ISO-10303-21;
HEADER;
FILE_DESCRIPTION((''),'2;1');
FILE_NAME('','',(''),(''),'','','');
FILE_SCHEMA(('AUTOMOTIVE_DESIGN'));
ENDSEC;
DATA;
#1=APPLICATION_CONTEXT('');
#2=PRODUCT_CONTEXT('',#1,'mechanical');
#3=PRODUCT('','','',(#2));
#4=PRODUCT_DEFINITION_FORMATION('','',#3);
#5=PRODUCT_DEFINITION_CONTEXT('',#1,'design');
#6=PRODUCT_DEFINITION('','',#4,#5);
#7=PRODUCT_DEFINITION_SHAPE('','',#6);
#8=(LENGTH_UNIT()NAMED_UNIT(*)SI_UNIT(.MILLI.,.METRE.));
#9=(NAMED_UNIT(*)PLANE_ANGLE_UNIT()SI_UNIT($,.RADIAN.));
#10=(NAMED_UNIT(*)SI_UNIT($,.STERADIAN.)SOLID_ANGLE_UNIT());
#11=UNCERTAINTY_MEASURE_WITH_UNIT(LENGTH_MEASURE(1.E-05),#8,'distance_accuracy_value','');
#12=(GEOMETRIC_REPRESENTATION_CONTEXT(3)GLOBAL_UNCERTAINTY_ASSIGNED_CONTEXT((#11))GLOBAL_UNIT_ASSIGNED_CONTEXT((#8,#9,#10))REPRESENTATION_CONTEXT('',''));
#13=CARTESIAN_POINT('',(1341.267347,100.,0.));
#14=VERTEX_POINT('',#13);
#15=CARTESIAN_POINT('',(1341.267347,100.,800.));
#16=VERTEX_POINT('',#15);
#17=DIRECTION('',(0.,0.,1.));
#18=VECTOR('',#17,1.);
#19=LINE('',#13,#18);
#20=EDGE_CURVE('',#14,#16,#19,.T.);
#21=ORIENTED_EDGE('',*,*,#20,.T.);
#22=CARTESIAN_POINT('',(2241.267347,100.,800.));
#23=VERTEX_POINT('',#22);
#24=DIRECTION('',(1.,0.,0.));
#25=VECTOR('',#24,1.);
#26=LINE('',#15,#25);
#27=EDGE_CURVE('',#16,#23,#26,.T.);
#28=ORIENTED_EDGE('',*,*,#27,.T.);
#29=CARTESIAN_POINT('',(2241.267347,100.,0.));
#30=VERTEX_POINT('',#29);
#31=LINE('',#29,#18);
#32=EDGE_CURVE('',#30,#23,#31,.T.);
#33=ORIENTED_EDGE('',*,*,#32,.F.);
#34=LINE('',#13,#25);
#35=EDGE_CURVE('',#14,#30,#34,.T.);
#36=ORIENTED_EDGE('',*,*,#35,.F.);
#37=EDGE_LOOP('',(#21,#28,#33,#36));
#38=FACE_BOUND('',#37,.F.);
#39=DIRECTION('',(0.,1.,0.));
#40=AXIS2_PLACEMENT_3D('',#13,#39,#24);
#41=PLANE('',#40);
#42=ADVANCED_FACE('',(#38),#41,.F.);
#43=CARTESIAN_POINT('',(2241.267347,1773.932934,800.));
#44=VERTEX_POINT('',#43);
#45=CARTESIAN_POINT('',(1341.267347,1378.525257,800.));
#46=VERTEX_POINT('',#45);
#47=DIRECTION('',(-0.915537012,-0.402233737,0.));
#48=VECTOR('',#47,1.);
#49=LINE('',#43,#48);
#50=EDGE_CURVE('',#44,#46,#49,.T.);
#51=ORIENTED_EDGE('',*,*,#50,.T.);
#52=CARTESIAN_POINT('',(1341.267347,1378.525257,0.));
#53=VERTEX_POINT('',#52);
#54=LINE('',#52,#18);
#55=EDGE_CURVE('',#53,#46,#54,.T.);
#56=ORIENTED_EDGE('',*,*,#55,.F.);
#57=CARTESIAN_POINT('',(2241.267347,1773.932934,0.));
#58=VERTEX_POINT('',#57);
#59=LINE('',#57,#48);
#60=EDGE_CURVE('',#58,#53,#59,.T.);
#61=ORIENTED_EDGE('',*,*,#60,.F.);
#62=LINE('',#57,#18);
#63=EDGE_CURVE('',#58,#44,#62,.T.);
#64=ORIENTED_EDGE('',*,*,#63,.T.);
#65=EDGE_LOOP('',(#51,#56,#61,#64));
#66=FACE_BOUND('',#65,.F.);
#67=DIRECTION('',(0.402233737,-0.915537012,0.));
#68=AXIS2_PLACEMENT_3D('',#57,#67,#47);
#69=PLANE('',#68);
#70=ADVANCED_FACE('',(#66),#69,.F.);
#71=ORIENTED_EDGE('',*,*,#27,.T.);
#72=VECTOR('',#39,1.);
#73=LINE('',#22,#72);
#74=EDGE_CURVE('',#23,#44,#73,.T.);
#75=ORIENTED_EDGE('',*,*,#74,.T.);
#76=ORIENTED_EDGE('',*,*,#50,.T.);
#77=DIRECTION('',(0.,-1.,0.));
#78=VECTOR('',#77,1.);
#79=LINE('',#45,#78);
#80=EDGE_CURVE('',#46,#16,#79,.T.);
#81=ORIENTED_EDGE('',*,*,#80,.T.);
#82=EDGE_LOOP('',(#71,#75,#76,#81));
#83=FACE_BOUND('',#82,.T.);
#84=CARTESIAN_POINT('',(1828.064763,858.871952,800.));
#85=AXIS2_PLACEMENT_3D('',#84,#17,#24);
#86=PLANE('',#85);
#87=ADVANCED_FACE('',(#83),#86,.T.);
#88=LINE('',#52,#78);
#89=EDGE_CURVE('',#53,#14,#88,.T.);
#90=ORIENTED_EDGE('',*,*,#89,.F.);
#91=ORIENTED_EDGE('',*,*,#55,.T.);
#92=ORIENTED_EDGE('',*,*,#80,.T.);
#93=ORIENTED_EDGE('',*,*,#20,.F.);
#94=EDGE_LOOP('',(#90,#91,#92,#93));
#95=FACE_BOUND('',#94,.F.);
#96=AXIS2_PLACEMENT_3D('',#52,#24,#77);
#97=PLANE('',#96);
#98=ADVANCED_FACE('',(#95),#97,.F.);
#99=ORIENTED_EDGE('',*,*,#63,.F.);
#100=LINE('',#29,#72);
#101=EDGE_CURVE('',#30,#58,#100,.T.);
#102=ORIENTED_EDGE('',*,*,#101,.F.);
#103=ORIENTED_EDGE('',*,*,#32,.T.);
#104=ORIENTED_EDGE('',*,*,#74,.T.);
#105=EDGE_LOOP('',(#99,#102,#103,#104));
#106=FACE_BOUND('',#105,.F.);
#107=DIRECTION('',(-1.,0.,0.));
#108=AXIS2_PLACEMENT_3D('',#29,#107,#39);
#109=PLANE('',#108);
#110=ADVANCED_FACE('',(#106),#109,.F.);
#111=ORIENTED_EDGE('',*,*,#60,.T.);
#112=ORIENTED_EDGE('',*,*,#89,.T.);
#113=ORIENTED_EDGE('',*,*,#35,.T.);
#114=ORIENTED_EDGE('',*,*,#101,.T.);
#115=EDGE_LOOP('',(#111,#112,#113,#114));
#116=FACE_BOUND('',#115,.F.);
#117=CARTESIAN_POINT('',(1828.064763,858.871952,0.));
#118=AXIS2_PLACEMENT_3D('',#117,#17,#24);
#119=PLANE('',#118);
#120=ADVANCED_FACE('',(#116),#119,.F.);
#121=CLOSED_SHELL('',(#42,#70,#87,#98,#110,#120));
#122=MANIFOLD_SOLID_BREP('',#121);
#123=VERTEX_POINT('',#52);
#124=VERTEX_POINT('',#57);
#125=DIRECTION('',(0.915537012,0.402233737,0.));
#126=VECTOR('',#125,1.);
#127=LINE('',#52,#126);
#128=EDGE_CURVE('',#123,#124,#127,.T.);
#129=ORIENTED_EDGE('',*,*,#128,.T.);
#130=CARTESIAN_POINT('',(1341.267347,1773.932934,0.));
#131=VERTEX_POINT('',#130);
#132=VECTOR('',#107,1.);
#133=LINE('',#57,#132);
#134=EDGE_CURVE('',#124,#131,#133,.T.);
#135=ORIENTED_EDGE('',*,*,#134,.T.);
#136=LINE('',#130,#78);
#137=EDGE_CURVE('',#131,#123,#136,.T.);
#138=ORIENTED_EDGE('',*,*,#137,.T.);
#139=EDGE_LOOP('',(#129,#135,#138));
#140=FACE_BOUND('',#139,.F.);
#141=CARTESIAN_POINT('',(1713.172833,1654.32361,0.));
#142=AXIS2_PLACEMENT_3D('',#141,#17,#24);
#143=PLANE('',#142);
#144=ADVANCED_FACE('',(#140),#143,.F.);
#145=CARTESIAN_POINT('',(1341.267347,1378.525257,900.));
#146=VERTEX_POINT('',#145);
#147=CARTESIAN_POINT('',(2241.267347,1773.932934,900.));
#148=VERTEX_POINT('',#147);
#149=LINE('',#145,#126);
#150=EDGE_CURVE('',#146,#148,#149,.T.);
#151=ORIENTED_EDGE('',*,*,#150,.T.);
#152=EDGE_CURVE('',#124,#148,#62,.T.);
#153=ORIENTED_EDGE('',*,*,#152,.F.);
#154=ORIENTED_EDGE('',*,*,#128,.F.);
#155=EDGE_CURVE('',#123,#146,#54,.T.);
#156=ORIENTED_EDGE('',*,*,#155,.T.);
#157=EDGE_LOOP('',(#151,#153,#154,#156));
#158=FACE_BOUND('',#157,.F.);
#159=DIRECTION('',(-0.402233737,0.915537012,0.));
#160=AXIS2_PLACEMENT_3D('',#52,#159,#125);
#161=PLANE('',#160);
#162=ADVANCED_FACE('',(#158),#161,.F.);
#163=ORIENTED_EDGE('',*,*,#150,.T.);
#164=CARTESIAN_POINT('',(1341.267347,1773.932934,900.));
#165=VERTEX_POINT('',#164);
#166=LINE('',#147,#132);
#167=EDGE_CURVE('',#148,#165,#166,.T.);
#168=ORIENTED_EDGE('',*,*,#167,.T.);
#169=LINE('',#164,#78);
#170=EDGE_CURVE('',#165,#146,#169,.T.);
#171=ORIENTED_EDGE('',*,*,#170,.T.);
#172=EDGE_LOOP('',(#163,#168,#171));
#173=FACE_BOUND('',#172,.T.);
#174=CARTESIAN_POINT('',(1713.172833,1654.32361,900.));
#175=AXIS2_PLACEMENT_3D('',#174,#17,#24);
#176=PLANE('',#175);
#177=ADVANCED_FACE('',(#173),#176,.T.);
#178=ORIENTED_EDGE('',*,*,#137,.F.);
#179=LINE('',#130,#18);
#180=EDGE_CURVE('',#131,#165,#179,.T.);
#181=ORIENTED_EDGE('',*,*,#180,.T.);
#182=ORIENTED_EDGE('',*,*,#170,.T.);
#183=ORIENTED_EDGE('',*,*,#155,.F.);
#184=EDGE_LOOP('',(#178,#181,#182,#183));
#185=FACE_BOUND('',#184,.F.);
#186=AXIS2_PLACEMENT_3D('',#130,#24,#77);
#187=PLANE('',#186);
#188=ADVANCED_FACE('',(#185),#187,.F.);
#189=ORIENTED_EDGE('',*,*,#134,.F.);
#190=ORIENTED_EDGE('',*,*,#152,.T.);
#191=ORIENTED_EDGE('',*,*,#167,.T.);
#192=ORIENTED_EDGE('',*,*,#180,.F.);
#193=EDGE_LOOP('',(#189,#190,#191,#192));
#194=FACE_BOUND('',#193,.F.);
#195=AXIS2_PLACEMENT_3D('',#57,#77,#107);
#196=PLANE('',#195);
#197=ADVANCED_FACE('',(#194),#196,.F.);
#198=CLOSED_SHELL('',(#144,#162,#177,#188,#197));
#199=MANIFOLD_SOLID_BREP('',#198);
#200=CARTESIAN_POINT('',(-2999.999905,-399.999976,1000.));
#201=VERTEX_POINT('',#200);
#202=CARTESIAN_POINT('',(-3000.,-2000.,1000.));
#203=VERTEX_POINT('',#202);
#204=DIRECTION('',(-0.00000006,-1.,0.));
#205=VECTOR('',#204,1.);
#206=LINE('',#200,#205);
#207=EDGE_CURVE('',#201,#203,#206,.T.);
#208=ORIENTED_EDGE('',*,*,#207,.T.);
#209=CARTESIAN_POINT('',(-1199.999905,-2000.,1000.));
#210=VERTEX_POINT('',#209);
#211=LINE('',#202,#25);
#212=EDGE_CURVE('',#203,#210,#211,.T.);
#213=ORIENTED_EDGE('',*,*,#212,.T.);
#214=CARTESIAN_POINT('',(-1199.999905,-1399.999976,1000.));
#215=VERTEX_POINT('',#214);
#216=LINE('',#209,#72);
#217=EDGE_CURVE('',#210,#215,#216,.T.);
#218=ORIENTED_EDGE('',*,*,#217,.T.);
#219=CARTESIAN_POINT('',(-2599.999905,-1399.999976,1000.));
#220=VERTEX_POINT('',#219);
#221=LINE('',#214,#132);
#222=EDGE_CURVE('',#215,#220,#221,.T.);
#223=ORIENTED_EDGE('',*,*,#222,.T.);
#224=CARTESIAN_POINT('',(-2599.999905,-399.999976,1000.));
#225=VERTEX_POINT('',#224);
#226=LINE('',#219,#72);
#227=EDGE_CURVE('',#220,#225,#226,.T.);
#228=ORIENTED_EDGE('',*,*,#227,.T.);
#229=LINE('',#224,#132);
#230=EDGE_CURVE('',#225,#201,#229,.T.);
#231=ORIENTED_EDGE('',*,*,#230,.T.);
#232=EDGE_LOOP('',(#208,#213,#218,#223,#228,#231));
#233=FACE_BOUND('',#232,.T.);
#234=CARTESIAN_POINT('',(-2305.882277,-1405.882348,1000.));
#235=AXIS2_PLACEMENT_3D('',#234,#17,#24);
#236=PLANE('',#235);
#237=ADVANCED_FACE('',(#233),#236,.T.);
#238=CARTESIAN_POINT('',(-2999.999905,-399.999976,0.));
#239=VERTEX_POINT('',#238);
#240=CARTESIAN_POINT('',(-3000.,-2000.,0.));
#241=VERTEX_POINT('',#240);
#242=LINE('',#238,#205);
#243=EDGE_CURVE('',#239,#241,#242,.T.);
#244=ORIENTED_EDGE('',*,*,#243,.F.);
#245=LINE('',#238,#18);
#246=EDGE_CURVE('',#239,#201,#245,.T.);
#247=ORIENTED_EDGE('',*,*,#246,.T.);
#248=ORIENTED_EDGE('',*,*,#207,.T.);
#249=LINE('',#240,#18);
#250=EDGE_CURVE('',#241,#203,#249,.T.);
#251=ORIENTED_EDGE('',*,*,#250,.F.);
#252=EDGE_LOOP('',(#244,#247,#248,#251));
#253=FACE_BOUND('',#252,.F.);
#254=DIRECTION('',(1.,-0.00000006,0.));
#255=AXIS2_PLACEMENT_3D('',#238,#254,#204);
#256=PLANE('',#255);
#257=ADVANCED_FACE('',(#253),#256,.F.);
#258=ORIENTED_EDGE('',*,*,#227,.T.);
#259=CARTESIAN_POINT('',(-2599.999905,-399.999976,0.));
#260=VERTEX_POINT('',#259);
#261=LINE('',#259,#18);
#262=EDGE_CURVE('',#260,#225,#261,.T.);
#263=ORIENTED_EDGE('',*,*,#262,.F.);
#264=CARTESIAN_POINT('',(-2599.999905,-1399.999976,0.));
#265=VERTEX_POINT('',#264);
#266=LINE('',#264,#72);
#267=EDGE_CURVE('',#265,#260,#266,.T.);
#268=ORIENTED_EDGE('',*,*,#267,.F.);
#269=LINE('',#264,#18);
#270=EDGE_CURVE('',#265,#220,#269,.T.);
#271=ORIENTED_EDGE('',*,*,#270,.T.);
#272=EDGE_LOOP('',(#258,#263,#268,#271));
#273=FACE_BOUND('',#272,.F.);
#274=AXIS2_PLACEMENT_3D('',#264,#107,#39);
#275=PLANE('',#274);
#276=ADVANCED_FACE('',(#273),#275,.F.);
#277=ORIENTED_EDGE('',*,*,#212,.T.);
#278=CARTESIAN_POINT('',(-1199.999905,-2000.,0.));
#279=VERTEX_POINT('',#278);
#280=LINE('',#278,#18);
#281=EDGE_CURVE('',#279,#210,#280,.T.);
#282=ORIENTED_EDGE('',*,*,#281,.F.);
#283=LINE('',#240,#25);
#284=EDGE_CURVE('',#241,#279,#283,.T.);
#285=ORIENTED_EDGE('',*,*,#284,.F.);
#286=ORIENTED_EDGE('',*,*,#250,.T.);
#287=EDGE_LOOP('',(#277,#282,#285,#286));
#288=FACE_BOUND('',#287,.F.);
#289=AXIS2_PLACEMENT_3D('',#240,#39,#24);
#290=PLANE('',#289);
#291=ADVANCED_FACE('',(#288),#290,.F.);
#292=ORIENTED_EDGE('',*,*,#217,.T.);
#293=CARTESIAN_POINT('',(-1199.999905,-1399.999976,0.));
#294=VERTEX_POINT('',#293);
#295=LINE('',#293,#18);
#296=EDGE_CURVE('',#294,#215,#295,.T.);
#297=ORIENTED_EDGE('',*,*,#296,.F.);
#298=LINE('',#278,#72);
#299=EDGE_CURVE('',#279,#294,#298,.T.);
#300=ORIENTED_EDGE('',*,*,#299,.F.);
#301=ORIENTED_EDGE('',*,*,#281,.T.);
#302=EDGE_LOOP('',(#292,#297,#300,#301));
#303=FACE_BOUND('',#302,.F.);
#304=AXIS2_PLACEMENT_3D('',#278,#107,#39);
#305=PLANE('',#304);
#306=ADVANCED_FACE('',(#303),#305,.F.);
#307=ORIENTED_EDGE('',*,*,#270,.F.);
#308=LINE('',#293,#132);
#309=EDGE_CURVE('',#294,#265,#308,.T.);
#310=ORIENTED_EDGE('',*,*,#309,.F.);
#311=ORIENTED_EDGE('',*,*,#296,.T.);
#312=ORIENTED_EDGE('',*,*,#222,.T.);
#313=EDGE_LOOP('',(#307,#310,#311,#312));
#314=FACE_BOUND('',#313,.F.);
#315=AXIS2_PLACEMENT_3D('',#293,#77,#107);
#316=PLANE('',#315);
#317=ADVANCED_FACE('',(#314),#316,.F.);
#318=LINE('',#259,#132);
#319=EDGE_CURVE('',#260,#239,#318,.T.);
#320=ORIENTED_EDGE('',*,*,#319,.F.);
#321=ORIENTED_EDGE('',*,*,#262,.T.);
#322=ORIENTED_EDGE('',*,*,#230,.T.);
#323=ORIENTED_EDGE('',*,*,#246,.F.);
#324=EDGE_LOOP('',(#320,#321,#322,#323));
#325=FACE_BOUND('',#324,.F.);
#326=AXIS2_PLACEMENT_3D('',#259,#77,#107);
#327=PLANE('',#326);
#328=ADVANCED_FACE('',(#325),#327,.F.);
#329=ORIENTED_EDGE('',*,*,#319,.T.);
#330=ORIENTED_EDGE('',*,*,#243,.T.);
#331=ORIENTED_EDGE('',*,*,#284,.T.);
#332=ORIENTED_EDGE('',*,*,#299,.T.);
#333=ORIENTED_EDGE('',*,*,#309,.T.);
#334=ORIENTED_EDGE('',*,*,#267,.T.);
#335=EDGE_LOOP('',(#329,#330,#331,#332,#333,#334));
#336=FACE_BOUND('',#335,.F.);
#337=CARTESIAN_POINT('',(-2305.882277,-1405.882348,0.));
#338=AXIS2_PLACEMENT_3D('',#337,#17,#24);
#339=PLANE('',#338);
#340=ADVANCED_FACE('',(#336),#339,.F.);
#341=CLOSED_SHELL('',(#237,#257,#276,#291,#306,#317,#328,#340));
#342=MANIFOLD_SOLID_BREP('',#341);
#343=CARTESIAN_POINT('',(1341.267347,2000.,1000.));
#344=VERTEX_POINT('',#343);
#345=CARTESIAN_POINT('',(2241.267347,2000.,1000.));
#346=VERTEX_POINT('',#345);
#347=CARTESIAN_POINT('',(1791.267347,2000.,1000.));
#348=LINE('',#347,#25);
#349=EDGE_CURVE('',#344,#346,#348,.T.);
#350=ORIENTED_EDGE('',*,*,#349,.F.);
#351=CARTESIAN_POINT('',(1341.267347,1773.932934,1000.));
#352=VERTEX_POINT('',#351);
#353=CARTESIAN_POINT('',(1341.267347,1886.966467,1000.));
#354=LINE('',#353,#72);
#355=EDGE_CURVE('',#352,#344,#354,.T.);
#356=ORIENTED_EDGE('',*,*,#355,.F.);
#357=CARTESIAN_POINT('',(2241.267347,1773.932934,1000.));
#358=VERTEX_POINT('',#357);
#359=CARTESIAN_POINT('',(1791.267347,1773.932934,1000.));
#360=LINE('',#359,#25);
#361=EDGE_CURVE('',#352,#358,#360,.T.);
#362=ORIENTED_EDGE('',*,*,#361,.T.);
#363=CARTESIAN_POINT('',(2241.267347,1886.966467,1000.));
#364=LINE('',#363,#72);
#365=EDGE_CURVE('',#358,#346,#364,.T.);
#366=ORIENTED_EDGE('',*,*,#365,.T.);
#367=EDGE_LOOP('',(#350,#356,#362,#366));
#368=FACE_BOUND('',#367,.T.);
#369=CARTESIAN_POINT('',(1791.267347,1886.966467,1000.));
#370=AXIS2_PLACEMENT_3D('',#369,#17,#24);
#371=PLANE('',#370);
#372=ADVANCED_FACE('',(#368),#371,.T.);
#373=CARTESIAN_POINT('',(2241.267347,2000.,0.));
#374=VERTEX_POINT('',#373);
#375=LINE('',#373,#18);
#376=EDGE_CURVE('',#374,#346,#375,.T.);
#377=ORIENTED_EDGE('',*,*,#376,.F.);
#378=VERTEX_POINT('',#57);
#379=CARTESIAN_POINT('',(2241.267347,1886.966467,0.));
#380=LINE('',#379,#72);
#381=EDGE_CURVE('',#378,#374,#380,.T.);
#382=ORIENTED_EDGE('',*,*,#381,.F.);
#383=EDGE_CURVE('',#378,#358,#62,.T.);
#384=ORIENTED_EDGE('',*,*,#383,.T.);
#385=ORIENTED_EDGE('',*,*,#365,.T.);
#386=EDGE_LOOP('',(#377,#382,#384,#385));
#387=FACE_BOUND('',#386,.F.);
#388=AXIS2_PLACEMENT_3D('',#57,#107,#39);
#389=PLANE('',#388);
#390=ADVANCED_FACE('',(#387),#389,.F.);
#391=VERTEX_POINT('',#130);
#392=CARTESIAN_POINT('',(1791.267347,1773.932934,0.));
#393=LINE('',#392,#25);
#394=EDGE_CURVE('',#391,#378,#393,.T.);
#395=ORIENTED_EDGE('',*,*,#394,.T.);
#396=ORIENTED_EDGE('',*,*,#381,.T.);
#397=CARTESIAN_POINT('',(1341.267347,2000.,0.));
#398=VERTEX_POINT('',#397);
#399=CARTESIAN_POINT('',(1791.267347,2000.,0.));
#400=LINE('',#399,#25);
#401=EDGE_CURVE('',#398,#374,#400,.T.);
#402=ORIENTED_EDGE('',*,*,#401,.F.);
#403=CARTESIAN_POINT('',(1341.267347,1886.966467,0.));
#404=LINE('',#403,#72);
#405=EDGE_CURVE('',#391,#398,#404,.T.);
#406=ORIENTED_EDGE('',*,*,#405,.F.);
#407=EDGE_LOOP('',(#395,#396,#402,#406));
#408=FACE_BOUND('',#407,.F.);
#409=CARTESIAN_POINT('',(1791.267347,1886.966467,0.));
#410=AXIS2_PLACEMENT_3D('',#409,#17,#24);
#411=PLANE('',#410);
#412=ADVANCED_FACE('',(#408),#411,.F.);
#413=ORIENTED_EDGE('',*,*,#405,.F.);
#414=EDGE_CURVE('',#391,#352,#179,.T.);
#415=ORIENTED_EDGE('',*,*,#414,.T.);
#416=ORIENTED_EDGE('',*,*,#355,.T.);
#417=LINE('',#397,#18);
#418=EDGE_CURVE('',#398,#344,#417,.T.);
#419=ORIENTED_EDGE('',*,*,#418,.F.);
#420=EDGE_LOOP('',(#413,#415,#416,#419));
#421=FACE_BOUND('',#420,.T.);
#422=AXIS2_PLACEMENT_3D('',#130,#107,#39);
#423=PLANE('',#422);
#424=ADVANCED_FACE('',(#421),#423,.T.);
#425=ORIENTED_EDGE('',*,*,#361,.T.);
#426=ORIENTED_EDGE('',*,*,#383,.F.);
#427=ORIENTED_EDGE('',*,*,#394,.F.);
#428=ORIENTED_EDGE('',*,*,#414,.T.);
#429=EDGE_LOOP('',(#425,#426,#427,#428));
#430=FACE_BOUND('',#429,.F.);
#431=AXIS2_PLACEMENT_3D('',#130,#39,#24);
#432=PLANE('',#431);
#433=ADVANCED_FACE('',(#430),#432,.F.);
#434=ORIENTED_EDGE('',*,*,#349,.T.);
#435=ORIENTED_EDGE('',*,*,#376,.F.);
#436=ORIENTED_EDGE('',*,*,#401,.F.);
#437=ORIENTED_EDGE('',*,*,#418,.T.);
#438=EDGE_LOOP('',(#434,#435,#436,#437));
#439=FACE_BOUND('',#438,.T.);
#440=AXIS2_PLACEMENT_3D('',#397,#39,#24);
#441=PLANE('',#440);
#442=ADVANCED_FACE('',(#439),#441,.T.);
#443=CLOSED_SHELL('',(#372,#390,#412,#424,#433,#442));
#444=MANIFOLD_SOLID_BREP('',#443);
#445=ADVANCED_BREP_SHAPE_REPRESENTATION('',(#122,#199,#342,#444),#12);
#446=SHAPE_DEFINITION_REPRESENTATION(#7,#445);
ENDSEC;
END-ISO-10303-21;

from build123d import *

# Parameters (mm, degrees)
F1_DEPTH = 1000
F0_W     = 900
F0_H     = 226.0670661926
F2_DEPTH = 800
F3_DEPTH = 900


# Not quite as in the source:
# - ends of sketch curves that miss each other by under 0.0002 mm in the source are joined


with BuildPart() as f1:
    # F0 (on Top) → F1 (new body)
    with BuildSketch(Plane.XY):
        Polygon((-3000, -2000), (-1199.9999046326, -2000), (-1199.9999046326, -1399.9999761581), (-2599.9999046326, -1399.9999761581), (-2599.9999046326, -399.9999761581), (-2999.9999046326, -399.9999761581), align=None)
    extrude(amount=F1_DEPTH)


with BuildPart() as f1b:
    # F0 (on Top) → F1, piece 2 (new body)
    with BuildSketch(Plane.XY):
        with Locations((1791.2673473358, 1886.9664669037)):
            Rectangle(F0_W, F0_H)
    extrude(amount=F1_DEPTH)


with BuildPart() as f2:
    # F0 (on Top) → F2 (new body)
    with BuildSketch(Plane.XY):
        Polygon((2241.2673473358, 100), (2241.2673473358, 1773.9329338074), (1341.2673473358, 1378.5252571106), (1341.2673473358, 100), align=None)
    extrude(amount=F2_DEPTH)


with BuildPart() as f3:
    # F0 (on Top) → F3 (new body)
    with BuildSketch(Plane.XY):
        Polygon((1341.2673473358, 1378.5252571106), (2241.2673473358, 1773.9329338074), (1341.2673473358, 1773.9329338074), align=None)
    extrude(amount=F3_DEPTH)


solid = Compound([f1.part, f1b.part, f2.part, f3.part])
